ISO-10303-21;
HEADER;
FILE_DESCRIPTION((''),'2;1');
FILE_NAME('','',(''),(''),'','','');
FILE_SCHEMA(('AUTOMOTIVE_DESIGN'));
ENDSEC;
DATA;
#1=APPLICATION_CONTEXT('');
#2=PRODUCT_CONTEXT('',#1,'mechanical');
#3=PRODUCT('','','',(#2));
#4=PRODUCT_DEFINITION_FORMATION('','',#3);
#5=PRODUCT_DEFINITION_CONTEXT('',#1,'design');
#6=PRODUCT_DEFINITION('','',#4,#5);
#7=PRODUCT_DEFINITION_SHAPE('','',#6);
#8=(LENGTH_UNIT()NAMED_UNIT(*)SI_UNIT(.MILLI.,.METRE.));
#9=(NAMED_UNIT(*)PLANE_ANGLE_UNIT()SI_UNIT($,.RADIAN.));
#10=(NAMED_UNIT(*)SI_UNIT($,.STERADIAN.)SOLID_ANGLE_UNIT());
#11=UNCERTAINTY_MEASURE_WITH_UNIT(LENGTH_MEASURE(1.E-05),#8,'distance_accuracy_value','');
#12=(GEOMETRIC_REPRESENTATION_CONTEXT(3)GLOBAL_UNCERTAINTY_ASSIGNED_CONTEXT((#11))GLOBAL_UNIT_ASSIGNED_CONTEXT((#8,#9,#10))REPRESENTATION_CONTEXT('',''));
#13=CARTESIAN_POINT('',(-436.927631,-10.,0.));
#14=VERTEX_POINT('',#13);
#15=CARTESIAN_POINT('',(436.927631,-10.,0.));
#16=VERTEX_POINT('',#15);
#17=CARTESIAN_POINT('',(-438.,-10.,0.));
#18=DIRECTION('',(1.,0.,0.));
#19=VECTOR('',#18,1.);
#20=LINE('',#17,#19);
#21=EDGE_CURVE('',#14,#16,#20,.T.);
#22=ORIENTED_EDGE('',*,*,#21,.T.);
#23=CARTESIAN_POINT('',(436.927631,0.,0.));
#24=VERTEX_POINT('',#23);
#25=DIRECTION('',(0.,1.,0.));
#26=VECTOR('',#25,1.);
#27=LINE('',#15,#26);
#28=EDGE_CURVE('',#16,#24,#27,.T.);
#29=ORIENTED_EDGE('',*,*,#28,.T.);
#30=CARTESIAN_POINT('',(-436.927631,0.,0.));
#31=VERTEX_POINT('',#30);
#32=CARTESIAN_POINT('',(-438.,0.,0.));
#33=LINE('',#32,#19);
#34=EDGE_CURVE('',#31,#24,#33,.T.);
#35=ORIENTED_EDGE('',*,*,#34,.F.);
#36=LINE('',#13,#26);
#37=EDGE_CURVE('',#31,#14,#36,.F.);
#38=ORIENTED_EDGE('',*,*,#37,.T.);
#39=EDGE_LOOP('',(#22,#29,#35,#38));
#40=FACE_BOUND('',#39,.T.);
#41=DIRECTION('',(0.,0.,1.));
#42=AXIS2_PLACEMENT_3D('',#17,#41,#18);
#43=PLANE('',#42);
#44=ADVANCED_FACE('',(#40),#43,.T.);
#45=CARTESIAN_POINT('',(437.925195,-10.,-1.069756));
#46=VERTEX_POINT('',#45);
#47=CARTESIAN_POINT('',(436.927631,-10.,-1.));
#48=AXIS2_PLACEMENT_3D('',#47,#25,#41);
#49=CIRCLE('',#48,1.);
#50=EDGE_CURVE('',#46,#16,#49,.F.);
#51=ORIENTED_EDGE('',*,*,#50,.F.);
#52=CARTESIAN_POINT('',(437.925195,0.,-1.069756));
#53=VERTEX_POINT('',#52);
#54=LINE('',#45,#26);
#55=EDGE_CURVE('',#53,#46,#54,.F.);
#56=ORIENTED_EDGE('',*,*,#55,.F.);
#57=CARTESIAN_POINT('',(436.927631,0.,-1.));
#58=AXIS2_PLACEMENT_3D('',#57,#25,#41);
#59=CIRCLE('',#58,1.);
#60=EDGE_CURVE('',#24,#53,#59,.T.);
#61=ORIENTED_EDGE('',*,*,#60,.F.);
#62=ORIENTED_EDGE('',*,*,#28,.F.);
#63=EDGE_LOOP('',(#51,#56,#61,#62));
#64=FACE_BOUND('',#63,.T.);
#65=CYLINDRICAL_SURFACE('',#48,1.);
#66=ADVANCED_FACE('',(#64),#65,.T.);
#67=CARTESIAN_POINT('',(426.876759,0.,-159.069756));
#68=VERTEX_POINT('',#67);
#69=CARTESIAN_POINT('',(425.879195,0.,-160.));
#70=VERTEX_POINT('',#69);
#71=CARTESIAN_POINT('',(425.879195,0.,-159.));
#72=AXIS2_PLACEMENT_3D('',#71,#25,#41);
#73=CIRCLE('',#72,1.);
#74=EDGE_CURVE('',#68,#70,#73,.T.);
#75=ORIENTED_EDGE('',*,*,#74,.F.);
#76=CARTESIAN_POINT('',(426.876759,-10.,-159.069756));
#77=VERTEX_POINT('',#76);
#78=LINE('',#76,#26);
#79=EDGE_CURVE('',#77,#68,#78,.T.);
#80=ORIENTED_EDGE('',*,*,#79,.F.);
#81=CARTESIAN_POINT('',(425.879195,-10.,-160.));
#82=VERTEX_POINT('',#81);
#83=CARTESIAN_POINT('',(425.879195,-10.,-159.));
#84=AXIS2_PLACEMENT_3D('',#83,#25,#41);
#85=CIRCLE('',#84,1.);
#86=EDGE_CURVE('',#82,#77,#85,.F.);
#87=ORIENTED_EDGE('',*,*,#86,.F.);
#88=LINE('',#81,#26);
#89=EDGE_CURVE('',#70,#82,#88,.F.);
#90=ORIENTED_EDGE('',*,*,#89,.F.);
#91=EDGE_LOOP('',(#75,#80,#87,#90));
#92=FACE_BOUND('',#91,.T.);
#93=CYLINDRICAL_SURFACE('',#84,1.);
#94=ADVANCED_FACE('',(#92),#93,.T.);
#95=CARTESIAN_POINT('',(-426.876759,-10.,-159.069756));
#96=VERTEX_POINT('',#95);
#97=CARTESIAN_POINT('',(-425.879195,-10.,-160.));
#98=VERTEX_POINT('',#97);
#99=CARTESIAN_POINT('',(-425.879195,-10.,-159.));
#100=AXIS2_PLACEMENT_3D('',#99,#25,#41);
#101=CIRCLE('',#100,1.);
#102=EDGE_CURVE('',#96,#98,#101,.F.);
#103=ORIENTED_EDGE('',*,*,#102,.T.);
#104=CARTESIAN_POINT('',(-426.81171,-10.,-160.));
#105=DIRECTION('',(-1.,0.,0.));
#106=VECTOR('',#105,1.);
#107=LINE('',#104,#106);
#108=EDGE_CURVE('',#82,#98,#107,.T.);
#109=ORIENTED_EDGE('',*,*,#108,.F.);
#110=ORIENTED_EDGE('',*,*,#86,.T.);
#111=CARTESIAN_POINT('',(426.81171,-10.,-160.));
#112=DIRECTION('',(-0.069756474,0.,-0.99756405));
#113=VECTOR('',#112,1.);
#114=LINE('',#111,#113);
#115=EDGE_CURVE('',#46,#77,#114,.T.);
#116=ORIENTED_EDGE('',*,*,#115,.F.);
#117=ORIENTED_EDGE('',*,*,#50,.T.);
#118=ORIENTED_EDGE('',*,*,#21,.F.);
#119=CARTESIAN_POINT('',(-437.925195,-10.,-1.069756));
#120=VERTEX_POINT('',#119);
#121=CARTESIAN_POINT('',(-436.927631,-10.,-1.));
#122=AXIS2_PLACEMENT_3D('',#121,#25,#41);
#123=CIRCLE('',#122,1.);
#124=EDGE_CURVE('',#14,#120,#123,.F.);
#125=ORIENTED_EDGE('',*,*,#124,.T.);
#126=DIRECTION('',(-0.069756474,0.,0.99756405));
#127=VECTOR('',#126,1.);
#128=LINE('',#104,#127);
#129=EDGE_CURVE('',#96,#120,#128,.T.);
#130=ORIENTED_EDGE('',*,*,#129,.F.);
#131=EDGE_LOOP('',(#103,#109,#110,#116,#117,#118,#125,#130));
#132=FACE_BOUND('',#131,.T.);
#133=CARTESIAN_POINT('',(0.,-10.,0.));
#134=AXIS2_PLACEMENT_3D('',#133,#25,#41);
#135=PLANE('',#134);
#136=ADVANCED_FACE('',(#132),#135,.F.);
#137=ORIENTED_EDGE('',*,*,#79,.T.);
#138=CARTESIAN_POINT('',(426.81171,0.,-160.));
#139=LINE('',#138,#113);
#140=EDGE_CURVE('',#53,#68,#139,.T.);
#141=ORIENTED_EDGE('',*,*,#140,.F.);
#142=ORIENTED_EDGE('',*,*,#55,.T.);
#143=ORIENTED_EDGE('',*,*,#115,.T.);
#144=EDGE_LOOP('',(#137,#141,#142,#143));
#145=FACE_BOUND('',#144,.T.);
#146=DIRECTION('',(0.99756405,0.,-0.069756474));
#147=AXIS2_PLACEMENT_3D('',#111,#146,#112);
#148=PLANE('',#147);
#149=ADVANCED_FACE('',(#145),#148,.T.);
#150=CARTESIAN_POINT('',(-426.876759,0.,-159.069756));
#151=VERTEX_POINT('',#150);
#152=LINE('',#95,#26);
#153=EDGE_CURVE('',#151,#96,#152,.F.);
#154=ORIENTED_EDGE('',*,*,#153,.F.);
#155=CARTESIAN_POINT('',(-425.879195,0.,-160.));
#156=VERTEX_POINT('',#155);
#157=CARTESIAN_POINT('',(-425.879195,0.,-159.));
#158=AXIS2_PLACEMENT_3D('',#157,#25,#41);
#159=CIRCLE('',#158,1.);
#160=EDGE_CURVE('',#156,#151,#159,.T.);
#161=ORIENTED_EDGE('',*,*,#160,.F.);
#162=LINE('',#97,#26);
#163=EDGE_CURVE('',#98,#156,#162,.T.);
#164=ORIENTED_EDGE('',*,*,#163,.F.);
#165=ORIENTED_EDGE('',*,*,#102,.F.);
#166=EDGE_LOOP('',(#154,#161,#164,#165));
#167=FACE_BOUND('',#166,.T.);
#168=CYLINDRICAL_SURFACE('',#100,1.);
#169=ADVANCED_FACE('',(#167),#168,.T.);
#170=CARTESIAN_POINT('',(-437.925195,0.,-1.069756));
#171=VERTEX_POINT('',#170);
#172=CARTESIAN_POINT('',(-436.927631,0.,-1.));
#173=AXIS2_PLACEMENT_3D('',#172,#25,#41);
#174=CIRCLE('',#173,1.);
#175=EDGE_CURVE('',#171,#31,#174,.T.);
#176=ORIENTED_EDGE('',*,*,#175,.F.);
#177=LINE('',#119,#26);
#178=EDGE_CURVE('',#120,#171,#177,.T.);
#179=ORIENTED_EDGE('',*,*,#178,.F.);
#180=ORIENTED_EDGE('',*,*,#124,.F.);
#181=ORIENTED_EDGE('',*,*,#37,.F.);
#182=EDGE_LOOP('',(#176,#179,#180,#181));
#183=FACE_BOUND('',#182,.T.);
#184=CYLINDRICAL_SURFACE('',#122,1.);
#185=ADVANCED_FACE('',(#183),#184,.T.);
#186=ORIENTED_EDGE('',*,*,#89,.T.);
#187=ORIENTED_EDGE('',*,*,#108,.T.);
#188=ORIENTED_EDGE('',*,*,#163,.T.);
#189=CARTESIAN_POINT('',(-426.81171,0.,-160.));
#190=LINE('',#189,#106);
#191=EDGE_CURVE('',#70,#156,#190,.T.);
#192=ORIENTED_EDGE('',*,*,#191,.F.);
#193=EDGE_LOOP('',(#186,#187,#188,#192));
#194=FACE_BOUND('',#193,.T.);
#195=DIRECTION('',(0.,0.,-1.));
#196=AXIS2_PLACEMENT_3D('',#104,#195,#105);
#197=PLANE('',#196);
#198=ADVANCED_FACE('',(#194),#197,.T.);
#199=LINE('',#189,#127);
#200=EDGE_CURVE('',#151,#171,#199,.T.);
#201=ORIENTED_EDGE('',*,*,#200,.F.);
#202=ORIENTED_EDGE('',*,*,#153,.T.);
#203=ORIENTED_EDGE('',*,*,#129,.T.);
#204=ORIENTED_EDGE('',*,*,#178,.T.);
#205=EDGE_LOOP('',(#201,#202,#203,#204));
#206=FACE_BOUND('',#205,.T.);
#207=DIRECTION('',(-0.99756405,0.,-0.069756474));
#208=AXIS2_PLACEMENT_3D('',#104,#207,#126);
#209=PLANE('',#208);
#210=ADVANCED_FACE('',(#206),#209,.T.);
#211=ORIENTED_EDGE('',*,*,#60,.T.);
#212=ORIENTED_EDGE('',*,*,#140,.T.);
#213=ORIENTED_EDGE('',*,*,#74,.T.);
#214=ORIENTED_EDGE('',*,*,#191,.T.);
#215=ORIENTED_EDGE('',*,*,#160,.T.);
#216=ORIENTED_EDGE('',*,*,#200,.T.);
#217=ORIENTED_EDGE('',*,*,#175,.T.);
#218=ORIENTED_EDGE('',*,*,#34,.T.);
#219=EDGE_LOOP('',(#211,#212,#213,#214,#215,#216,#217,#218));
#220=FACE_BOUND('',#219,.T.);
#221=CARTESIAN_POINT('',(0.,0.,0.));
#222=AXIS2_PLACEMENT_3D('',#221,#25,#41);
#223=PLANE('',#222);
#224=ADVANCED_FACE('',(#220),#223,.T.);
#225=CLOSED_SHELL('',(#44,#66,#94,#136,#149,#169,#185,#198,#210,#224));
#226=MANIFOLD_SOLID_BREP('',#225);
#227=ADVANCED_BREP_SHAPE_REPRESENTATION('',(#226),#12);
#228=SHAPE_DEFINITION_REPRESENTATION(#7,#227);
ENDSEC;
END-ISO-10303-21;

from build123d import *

# Parameters (mm, degrees)
BASE_FLANGE1_DEPTH = 10
FILLET_1_0_R       = 1


# Sheet-metal steps are written as plain solids
with BuildPart() as part:
    # Sketch1 → Base-Flange1 (new body)
    with BuildSketch(Plane(origin=(0, 0, 0), x_dir=(1, 0, 0), z_dir=(0, 1, 0))):
        Polygon((-426.811710089, 160), (426.811710089, 160), (438, 0), (-438, 0), align=None)
    extrude(amount=-BASE_FLANGE1_DEPTH)

    # Fillet-1.0
    fillet_1_0_edges = [part.edges().sort_by_distance(p)[0] for p in [
        (-426.811710089, -5, -160),
        (426.811710089, -5, -160),
        (438, -5, 0),
        (-438, -5, 0),
    ]]
    fillet(fillet_1_0_edges, radius=FILLET_1_0_R)


solid = part.part
